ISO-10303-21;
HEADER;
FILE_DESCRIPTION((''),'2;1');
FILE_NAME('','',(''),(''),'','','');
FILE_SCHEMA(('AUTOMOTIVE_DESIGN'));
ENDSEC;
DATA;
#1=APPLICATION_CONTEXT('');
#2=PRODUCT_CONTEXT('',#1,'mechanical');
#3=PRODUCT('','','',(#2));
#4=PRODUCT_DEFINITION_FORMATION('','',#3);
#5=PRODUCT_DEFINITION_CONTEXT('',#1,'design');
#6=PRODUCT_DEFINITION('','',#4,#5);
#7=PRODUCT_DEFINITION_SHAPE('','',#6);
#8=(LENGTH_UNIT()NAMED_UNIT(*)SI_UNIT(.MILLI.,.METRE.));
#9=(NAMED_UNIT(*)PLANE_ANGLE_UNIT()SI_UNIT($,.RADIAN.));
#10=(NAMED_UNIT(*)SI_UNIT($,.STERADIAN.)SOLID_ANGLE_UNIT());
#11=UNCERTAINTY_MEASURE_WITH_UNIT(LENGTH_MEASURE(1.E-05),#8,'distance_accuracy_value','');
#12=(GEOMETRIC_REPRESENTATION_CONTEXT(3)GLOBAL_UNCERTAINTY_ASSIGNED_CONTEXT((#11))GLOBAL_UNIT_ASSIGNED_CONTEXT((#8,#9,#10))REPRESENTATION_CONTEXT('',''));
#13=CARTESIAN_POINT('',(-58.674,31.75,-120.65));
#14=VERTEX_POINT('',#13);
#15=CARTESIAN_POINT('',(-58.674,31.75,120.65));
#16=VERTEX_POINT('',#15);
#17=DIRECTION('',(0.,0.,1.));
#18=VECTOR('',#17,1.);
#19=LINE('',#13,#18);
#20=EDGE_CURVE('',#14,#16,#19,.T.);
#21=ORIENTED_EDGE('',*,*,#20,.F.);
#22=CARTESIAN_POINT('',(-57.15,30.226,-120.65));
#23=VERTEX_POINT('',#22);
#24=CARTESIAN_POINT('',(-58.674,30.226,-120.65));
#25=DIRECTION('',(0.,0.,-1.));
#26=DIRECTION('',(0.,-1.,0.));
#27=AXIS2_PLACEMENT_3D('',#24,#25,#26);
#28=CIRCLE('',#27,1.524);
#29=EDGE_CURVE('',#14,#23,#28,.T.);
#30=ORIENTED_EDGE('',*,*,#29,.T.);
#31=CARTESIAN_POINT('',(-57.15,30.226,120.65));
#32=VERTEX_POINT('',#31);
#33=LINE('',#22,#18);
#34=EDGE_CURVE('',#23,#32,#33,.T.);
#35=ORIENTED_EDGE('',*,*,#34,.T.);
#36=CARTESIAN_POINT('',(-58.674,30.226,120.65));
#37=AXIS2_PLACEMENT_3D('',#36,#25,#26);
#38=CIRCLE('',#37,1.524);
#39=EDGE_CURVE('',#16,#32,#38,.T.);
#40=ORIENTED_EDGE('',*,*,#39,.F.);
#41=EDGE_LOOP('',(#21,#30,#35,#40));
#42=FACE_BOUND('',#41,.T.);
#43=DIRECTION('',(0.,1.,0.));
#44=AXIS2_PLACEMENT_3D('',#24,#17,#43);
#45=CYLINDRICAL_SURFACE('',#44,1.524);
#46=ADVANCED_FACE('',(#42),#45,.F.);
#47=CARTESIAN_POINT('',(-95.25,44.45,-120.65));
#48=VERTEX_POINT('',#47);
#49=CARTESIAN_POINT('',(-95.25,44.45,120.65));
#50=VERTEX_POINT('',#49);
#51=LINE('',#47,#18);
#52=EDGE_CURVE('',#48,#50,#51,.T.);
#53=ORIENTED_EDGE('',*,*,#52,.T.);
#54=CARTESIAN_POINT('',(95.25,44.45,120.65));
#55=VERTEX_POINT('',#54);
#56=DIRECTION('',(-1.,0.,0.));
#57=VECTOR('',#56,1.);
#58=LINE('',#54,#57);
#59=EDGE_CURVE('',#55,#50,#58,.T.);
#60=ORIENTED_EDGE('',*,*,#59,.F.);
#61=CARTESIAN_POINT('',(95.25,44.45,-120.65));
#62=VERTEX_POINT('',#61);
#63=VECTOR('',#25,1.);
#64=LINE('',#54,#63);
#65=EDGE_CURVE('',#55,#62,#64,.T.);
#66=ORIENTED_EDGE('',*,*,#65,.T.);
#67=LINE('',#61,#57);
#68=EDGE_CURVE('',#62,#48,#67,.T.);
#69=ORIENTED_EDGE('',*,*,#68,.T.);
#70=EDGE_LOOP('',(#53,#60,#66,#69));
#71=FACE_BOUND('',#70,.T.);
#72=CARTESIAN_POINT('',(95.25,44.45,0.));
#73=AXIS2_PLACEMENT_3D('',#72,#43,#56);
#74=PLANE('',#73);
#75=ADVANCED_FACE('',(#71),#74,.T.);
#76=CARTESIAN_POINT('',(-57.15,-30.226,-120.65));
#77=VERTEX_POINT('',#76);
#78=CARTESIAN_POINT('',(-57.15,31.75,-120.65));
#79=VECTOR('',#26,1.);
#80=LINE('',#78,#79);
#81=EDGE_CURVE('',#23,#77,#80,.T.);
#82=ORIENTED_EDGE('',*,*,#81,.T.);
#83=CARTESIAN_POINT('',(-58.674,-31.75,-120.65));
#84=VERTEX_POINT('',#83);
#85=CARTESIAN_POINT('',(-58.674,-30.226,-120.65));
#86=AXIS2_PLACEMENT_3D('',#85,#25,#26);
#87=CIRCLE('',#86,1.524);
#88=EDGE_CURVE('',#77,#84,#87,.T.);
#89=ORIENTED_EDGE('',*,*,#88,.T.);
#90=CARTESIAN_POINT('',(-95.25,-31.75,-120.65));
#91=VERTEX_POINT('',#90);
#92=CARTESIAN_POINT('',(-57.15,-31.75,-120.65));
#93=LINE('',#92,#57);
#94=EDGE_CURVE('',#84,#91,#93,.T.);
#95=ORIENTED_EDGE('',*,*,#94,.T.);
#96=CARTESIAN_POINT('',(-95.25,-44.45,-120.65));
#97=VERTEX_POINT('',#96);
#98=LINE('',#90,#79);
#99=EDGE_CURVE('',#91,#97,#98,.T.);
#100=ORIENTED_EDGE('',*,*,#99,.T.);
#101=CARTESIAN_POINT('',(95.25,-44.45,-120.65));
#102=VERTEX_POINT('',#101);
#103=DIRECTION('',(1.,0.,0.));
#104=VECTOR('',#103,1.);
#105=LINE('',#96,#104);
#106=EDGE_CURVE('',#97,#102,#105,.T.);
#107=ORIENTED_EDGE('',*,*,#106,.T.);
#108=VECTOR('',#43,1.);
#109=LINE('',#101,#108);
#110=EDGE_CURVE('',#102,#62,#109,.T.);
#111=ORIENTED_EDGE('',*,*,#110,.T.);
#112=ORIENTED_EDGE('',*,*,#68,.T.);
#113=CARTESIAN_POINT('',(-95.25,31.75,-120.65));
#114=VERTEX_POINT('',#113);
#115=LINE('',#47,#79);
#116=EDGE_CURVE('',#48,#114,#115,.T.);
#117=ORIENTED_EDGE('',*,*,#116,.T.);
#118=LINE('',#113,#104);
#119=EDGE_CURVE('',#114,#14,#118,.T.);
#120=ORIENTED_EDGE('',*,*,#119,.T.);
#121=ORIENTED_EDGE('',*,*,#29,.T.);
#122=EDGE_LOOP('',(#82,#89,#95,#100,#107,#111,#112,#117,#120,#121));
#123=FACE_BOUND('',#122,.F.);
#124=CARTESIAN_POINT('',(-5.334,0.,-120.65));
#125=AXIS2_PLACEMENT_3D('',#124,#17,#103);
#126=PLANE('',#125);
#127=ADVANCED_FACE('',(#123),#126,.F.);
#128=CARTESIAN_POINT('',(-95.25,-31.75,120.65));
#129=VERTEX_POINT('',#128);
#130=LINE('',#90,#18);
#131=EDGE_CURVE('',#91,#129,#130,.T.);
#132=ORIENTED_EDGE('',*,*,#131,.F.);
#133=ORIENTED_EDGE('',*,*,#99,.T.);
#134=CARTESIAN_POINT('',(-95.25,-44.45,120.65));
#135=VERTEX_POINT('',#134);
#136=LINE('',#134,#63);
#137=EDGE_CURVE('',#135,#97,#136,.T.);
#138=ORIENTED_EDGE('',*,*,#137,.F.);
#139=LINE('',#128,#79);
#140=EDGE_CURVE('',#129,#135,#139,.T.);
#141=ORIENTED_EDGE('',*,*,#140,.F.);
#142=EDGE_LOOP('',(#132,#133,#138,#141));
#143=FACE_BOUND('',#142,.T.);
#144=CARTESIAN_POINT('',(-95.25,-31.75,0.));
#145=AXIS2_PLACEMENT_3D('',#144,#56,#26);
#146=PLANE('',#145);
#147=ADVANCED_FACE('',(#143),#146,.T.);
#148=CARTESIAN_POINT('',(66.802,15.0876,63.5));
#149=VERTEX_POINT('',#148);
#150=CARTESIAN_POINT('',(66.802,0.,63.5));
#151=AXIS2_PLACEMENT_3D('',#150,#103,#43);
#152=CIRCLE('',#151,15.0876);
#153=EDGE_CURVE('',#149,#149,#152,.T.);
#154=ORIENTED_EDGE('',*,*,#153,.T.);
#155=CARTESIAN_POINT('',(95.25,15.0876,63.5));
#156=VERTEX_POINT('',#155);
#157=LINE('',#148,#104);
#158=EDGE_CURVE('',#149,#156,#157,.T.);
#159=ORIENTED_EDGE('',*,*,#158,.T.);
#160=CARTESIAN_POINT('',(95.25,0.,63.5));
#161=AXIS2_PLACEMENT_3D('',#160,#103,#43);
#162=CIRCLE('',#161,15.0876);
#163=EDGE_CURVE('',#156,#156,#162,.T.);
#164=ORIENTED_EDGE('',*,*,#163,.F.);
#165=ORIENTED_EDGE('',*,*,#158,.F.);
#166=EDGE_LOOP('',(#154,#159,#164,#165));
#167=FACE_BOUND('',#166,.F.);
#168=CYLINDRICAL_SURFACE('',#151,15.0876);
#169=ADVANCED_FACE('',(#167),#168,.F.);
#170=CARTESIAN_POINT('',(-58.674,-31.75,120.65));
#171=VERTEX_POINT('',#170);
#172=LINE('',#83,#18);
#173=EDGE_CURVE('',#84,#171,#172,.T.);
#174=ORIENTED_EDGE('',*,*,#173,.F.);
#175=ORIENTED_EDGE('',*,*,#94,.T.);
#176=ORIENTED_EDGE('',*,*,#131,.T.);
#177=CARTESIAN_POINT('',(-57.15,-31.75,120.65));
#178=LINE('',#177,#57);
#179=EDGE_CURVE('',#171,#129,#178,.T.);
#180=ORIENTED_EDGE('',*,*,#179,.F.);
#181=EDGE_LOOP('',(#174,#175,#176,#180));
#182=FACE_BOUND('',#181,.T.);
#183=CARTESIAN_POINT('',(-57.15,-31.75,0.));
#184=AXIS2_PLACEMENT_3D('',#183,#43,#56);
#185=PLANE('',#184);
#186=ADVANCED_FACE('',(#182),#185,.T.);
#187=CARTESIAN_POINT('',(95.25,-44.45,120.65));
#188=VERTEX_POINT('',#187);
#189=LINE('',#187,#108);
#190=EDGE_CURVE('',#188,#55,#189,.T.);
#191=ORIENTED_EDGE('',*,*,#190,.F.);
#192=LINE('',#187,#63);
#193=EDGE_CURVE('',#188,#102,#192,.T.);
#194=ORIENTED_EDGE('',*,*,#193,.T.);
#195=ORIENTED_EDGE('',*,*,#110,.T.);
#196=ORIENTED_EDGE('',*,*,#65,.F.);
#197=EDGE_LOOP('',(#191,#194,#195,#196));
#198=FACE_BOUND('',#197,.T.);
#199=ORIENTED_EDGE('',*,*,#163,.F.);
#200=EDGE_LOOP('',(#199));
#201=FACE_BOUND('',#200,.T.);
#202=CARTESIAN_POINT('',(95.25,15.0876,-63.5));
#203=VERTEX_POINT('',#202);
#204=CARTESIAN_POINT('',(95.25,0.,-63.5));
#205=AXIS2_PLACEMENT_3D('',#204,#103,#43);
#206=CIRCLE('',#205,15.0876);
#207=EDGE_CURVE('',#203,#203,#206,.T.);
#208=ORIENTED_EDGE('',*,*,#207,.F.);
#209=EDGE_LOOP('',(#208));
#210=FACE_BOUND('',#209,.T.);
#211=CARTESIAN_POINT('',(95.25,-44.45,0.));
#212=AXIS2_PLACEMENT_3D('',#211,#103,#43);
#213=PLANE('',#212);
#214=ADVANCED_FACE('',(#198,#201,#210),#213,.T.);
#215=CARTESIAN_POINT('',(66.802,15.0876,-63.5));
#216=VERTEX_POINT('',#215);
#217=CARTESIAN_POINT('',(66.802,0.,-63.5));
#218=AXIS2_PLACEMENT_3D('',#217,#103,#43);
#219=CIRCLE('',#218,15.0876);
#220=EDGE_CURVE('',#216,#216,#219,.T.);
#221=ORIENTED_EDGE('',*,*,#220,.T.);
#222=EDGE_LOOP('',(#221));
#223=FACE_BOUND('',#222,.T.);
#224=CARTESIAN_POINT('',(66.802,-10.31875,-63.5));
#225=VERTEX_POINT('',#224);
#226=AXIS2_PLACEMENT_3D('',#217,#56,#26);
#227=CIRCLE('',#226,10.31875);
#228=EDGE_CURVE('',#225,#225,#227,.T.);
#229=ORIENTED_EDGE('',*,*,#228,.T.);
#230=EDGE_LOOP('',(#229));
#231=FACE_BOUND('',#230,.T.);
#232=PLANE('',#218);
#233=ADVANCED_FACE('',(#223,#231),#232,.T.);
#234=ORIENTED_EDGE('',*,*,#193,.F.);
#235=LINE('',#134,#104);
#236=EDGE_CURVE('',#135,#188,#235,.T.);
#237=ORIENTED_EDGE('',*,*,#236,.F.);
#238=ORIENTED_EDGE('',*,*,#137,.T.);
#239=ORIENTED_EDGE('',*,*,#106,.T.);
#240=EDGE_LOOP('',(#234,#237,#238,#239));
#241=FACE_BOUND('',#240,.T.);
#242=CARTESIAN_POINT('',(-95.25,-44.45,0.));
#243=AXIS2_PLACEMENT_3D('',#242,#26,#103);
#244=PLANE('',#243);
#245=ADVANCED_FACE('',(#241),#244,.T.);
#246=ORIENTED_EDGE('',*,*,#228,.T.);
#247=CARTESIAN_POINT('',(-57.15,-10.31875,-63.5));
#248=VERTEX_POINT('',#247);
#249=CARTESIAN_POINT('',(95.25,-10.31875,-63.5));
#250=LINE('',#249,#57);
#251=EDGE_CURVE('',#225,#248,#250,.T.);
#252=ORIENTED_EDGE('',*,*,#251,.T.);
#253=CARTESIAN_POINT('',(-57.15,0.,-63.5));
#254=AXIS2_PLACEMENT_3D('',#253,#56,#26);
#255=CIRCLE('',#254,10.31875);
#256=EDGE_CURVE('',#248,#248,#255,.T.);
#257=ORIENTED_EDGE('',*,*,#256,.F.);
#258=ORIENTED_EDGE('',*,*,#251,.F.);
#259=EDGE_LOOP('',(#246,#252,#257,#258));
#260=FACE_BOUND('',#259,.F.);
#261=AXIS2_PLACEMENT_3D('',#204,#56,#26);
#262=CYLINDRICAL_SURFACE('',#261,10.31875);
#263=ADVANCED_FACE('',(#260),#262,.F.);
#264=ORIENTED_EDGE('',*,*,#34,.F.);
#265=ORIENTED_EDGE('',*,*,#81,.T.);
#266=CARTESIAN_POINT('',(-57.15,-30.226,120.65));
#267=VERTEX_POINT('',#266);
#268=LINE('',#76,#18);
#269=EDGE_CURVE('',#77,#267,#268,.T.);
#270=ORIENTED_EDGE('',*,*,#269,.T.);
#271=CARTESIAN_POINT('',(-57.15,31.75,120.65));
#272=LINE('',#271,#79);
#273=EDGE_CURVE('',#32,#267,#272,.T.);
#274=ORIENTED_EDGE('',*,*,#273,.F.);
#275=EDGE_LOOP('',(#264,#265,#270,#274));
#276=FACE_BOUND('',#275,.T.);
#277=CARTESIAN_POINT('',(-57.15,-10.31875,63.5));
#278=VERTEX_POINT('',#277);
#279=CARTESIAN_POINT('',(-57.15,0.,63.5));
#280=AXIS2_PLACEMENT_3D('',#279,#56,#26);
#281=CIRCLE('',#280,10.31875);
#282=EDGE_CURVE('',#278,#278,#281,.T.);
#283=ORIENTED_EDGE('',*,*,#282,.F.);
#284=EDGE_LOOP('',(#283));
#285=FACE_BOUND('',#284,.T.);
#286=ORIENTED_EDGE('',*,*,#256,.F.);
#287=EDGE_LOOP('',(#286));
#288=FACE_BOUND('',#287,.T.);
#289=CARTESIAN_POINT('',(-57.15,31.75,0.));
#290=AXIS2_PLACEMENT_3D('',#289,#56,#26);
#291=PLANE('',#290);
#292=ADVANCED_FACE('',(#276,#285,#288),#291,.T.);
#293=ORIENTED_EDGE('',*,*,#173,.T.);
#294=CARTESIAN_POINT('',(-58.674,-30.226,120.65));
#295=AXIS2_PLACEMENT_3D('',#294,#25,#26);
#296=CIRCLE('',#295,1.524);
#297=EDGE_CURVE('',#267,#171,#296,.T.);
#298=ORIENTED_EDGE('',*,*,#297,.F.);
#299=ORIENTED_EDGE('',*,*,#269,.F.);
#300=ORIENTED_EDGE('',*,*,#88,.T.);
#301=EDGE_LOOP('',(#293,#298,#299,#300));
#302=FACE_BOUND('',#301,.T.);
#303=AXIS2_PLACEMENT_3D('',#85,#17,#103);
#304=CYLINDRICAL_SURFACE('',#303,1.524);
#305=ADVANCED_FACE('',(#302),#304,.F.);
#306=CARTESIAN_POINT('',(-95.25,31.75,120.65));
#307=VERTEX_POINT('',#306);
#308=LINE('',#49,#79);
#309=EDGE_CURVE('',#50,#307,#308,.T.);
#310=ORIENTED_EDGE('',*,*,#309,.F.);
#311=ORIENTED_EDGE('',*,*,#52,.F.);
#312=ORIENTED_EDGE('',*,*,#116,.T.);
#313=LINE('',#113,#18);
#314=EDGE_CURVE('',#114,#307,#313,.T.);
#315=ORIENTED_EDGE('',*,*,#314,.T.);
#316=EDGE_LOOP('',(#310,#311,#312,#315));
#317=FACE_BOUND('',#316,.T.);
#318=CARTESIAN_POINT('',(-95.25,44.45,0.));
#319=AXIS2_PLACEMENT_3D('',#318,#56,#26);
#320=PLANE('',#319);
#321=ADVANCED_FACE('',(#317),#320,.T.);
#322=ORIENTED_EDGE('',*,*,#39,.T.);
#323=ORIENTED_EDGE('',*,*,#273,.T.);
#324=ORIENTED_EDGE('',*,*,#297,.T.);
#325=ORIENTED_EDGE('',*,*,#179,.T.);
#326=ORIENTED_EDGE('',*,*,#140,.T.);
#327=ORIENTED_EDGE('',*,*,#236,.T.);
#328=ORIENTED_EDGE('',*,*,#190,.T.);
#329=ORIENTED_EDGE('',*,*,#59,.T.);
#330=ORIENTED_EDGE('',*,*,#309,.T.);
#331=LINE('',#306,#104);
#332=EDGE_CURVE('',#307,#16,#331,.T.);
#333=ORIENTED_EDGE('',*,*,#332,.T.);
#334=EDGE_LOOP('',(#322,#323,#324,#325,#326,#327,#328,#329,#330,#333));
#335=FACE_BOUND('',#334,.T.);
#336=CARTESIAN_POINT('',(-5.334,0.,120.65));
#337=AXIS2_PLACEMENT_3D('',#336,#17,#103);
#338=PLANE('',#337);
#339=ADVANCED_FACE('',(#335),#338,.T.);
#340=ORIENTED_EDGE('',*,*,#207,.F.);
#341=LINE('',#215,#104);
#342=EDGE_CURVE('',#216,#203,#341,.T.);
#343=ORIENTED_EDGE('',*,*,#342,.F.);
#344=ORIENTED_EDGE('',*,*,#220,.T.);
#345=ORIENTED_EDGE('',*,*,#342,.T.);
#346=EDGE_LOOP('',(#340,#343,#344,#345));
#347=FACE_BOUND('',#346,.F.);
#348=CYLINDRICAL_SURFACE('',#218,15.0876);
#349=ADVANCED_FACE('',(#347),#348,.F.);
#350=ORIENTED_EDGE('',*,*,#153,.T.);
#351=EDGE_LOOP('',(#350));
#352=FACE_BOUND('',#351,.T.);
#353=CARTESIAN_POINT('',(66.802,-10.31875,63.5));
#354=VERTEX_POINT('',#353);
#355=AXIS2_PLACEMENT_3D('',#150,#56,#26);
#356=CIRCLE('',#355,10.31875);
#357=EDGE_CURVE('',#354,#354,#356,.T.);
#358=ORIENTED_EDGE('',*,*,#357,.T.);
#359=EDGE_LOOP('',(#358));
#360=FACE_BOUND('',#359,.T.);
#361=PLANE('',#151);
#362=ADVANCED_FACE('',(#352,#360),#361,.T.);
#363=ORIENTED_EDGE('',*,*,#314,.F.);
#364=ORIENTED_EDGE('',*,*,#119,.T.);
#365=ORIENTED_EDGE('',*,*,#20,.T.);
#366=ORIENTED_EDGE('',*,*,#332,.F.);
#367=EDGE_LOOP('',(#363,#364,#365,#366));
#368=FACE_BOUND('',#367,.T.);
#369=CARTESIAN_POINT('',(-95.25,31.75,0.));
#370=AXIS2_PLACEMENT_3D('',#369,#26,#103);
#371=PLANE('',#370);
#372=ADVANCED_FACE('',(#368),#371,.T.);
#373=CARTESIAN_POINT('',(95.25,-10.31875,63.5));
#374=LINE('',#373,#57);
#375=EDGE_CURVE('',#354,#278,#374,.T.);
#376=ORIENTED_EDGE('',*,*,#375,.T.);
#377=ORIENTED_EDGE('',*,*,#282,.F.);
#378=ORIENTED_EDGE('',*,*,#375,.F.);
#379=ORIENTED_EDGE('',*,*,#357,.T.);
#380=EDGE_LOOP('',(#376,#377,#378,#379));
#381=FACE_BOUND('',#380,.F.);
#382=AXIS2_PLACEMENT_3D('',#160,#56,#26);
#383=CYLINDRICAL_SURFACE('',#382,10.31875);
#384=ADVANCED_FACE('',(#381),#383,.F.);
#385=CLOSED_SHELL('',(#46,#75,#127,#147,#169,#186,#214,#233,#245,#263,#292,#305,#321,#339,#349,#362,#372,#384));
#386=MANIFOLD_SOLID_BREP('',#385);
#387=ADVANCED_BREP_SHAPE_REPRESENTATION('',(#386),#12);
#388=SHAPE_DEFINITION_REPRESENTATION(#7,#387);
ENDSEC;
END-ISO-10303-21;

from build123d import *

# Parameters (mm, degrees)
F1_DEPTH       = 120.65
F3_D           = 20.6375
F3_CBORE_D     = 30.1752
F3_CBORE_DEPTH = 28.448
F4_R           = 1.524


# Not quite as in the source:
# - a length typed as a fraction of an inch, garbled in the dataset ("3 / 203.2 mm" for 3/8 in), is restored


with BuildPart() as f1:
    # F0 (on Top) → F1 (new body, symmetric)
    with BuildSketch(Plane.XY):
        Polygon((95.25, 44.45), (-95.25, 44.45), (-95.25, 31.75), (-57.15, 31.75), (-57.15, -31.75), (-95.25, -31.75), (-95.25, -44.45), (95.25, -44.45), align=None)
    extrude(amount=F1_DEPTH, both=True)

    # F3 (through all)
    with Locations(Plane.YZ.offset(95.25)):
        with Locations((0, 63.5), (0, -63.5)):
            CounterBoreHole(F3_D / 2, F3_CBORE_D / 2, F3_CBORE_DEPTH)

    # F4
    f4_edges = [f1.edges().sort_by_distance(p)[0] for p in [
        (-57.15, -31.75, 0),
        (-57.15, 31.75, 0),
    ]]
    fillet(f4_edges, radius=F4_R)


solid = f1.part
